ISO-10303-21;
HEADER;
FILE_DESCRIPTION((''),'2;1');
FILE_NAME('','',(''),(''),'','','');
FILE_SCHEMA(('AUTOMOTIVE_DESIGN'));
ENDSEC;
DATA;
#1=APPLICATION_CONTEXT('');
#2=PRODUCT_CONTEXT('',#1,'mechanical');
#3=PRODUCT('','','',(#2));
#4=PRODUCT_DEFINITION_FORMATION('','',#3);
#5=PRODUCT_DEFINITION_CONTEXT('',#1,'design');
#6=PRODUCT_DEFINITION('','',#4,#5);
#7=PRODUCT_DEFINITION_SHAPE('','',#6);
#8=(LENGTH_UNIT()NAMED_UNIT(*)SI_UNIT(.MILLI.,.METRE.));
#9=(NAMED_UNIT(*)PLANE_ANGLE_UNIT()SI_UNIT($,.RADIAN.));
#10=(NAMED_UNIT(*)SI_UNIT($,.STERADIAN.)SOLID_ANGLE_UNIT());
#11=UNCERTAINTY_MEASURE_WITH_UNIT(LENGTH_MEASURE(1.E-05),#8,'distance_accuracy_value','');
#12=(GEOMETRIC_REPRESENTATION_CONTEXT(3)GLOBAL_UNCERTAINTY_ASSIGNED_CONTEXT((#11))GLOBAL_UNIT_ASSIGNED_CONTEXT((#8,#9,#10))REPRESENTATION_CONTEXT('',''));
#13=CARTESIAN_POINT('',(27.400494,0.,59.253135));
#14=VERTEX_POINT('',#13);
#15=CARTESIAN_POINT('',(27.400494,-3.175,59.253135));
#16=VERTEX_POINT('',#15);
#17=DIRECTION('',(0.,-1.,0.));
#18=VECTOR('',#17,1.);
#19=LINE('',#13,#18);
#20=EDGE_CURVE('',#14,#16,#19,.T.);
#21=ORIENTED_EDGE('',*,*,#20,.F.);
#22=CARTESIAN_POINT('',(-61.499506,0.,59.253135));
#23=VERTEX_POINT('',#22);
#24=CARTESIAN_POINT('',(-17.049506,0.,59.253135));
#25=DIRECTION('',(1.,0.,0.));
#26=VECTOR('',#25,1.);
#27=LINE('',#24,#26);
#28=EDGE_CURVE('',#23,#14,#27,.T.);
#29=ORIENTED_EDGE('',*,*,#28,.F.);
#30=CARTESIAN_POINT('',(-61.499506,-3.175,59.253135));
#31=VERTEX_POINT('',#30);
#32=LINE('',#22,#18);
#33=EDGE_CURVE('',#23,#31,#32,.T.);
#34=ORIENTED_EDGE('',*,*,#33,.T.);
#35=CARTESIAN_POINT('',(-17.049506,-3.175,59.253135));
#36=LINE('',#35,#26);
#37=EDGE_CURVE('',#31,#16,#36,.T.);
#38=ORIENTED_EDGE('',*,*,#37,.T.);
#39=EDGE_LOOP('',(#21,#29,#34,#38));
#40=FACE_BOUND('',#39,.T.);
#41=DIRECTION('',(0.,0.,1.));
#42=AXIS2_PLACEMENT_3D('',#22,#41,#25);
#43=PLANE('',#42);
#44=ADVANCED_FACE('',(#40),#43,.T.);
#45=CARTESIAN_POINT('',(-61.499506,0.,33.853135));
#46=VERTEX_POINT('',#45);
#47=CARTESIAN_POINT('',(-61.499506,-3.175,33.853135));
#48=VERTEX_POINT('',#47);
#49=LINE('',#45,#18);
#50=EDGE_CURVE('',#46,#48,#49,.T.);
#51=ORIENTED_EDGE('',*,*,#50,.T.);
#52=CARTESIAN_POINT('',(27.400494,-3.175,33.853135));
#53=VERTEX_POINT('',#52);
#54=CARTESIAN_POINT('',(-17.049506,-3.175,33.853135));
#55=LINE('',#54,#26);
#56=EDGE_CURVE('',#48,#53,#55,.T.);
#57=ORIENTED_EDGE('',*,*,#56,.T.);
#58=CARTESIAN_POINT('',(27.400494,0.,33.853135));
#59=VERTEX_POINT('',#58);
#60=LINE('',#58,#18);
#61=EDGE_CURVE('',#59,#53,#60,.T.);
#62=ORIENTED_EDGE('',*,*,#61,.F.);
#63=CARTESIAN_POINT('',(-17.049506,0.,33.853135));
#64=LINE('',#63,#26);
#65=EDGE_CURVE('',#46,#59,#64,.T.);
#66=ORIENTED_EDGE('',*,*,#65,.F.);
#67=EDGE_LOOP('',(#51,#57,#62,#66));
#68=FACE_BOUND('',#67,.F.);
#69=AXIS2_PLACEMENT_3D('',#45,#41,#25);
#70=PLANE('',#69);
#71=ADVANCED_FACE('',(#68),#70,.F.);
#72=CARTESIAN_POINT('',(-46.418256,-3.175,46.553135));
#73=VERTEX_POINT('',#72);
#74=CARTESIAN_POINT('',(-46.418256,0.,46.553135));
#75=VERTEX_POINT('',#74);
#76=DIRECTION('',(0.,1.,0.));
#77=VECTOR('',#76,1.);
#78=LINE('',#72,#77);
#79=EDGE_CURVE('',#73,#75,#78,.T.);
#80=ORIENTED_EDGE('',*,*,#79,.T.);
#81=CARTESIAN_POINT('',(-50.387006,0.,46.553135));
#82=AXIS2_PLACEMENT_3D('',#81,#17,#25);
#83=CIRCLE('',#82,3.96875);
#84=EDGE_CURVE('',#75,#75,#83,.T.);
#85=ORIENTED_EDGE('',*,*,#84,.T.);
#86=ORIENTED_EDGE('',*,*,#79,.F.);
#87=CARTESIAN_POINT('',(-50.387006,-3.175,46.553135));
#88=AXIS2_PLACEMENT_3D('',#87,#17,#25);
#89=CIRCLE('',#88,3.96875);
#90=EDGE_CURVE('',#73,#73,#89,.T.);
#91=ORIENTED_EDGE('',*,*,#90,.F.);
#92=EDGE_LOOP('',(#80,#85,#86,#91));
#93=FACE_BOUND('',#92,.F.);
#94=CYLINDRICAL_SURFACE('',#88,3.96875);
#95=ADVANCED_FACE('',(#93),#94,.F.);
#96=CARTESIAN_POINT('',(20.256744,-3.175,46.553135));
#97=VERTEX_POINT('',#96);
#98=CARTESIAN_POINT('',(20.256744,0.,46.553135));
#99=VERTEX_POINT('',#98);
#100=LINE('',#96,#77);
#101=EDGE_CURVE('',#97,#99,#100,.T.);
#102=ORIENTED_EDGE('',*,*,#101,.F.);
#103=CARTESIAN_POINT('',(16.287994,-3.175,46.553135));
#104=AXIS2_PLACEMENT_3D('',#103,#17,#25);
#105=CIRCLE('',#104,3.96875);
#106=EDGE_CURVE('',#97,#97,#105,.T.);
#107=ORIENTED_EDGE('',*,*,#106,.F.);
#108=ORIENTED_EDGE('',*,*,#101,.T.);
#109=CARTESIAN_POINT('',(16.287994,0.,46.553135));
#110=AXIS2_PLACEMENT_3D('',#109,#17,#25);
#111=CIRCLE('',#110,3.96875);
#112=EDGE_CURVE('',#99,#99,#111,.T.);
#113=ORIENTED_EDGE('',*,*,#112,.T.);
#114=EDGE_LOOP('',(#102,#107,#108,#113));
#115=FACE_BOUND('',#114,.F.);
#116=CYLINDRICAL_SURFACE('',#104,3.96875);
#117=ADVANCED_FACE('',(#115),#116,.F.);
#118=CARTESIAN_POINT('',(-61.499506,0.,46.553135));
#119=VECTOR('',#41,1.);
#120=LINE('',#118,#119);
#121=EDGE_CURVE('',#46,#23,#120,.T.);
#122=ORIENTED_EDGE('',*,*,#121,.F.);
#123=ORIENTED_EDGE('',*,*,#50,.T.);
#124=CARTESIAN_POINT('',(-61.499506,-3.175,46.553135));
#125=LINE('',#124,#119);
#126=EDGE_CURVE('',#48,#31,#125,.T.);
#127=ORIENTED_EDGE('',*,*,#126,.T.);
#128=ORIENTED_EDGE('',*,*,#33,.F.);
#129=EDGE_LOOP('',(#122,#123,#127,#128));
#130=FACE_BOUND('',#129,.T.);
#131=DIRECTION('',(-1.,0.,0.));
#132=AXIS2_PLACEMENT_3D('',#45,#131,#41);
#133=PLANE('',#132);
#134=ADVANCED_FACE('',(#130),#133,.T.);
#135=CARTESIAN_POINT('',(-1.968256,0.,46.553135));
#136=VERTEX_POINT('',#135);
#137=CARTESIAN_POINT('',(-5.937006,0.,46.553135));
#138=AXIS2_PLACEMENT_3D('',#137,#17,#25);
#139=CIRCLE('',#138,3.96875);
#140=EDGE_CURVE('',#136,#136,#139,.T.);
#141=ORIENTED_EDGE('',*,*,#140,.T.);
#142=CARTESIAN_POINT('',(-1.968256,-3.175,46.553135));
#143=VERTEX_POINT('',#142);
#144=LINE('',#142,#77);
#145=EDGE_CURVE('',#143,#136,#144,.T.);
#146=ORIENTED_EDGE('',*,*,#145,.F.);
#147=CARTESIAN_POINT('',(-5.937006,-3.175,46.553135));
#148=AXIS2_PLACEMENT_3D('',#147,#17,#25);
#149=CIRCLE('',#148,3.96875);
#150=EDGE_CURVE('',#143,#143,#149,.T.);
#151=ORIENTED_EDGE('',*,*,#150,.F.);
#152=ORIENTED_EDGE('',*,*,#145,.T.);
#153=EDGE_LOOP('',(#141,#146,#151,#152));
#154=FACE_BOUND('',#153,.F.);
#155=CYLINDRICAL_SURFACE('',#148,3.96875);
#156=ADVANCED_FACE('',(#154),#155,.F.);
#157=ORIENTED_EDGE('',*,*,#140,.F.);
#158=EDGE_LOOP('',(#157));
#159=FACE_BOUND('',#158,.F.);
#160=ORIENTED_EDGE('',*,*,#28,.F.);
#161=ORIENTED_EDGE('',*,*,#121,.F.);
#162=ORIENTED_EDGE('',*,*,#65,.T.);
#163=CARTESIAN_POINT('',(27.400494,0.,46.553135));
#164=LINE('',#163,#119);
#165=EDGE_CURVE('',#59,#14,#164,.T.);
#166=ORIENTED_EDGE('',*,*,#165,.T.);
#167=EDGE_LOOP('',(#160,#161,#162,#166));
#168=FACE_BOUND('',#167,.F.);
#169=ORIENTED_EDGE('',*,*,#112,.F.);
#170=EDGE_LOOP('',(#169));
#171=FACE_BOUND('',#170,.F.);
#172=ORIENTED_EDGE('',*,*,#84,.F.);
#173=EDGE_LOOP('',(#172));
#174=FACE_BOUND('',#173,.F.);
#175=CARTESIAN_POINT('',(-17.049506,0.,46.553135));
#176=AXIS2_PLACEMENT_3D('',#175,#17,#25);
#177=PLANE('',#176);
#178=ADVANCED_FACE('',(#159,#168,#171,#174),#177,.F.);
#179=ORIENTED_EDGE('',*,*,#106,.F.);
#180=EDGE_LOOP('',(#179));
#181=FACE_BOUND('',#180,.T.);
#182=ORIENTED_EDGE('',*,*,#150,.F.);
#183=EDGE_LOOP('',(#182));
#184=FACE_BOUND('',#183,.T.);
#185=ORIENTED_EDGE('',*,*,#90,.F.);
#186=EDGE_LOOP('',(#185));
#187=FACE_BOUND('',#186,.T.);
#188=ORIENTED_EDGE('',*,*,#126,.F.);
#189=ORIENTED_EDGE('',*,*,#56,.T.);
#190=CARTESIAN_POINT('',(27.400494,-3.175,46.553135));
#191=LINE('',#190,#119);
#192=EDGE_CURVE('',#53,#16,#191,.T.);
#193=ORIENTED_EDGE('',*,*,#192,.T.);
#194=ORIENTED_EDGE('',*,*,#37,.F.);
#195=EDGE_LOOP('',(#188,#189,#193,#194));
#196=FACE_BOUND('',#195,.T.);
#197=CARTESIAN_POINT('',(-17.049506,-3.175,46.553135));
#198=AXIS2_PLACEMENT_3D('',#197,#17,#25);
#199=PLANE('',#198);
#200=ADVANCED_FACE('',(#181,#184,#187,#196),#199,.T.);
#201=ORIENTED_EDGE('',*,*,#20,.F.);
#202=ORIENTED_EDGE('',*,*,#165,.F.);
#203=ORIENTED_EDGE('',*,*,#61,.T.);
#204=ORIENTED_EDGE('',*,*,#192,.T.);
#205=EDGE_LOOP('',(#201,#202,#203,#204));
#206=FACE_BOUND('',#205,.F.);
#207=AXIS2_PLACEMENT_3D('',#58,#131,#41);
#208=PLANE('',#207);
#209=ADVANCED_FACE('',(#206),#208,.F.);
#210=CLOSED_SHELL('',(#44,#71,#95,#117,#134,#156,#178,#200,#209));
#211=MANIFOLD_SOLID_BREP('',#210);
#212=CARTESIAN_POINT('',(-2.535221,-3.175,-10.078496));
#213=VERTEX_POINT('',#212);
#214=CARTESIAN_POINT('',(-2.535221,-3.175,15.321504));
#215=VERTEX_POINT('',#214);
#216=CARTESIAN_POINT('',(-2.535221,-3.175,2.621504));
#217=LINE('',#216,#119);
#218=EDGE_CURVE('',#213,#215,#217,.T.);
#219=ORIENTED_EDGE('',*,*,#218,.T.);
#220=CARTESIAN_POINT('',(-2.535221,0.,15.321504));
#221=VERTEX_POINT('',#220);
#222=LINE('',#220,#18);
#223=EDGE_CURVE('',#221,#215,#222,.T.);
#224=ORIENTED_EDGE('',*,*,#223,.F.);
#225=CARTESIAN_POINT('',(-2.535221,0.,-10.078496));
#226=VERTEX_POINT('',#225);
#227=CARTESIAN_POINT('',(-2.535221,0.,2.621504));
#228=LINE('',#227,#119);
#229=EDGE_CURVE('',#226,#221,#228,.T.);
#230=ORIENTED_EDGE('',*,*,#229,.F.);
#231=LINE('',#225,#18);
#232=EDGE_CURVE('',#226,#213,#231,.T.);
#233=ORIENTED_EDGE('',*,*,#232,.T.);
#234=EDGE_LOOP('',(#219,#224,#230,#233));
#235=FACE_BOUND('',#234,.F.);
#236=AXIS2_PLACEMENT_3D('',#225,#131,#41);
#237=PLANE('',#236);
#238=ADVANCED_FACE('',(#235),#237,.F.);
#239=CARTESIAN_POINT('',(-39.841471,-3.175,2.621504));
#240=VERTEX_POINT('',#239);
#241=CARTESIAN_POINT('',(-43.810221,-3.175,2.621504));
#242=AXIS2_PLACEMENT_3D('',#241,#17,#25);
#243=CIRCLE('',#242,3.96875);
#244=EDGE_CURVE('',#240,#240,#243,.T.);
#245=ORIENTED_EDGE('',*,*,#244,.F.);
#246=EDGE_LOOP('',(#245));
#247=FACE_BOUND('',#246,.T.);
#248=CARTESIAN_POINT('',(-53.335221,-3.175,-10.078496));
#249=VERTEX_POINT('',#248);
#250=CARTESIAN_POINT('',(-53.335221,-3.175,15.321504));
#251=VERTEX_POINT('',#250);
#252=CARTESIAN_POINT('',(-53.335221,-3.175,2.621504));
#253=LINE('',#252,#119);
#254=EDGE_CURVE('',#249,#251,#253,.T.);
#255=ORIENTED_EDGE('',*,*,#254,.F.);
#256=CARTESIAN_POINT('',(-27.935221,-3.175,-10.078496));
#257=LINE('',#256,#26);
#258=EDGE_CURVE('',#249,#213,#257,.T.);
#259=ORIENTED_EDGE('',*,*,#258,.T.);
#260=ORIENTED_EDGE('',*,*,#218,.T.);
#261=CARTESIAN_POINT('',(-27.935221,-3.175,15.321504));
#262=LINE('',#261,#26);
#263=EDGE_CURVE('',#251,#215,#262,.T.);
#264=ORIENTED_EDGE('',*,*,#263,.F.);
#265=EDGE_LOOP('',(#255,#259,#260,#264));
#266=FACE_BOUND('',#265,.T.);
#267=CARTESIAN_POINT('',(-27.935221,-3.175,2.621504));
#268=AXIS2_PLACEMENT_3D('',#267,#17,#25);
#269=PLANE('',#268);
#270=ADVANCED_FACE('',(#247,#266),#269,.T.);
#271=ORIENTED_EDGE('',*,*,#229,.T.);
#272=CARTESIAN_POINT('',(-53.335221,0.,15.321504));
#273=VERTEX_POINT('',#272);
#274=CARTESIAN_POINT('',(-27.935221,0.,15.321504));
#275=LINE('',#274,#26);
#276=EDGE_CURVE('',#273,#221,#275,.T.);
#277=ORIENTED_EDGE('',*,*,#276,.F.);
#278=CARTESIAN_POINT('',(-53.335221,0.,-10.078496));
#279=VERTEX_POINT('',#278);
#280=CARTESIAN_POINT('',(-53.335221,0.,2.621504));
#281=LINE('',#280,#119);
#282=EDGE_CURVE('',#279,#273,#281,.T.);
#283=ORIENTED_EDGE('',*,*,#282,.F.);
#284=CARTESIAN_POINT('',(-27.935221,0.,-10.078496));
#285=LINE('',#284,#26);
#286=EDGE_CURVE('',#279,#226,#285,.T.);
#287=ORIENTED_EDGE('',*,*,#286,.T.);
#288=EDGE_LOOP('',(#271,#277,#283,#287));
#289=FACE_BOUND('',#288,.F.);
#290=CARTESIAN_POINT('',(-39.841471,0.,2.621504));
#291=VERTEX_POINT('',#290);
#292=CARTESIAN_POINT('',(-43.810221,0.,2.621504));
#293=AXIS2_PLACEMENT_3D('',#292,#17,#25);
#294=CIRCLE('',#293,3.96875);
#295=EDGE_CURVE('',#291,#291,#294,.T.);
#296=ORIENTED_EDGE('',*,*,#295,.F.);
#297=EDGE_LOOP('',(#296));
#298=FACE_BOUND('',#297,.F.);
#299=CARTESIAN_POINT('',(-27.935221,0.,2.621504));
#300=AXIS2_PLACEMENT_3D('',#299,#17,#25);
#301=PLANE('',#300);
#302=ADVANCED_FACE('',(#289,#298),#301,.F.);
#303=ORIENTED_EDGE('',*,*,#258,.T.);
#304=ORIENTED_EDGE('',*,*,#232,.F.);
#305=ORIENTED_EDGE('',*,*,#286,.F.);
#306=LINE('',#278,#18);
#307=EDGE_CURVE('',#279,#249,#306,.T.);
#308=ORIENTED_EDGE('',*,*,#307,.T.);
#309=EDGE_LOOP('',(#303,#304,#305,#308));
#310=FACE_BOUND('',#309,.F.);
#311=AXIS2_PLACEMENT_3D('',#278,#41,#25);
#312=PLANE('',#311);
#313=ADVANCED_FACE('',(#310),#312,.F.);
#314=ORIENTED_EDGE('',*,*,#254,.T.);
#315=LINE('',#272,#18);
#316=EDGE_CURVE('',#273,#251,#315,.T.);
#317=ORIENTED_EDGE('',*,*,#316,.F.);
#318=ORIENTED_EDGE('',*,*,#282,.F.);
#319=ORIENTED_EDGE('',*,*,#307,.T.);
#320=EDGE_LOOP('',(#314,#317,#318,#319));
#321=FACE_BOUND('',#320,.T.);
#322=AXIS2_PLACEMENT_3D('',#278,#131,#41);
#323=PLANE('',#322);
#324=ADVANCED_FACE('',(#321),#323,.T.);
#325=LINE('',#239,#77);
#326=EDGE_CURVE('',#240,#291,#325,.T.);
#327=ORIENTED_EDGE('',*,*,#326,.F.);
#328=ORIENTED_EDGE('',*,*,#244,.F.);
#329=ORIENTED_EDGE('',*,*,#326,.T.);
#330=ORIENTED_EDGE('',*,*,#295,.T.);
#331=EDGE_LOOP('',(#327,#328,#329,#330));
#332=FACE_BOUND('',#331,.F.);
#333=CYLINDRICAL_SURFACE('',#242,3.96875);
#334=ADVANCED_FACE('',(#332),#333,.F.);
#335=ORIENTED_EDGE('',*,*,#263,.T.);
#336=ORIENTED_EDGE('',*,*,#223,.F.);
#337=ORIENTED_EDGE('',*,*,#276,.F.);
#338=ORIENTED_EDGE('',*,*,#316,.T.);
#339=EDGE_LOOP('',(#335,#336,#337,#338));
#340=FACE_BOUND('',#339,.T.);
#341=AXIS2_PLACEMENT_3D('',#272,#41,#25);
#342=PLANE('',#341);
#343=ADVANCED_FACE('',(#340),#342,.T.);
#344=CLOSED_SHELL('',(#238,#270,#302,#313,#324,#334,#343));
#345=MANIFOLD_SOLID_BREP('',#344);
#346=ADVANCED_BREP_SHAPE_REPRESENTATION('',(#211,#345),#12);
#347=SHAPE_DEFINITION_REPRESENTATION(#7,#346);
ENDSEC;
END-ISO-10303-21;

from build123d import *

# Parameters (mm, degrees)
F0_W     = 88.9
F0_H     = 25.4
F1_DEPTH = 3.175
F0_W_2   = 50.8
F2_R     = 3.96875
F3_DEPTH = 3.176


# Not quite as in the source:
# - a feature names something its author has since deleted; it is built from what else it names


with BuildPart() as f1:
    # F0 (on Front) → F1 (new body)
    with BuildSketch(Plane.XZ):
        with Locations((-17.0495061394, 46.5531354078)):
            Rectangle(F0_W, F0_H)
    extrude(amount=F1_DEPTH)


with BuildPart() as f1b:
    # F0 (on Front) → F1, piece 2 (new body)
    with BuildSketch(Plane.XZ):
        with Locations((-27.9352209627, 2.6215043573)):
            Rectangle(F0_W_2, F0_H)
    extrude(amount=F1_DEPTH)


with BuildPart() as f3_tool:
    # F2 (on face) → F3 (new body, through all)
    with BuildSketch(Plane.XZ.offset(3.175)):
        with Locations((-50.3870061394, 46.5531354078)):
            Circle(F2_R)
        with Locations((-43.8102209627, 2.6215043573)):
            Circle(F2_R)
        with Locations((-5.9370061394, 46.5531354078)):
            Circle(F2_R)
        with Locations((16.2879938606, 46.5531354078)):
            Circle(F2_R)
    extrude(amount=-F3_DEPTH)


with BuildPart() as f1_1:
    add(f1.part)

    # F3: cut by f3_tool
    add(f3_tool.part, mode=Mode.SUBTRACT)


with BuildPart() as f1b_1:
    add(f1b.part)

    # F3: cut by f3_tool
    add(f3_tool.part, mode=Mode.SUBTRACT)


solid = Compound([f1_1.part, f1b_1.part])
